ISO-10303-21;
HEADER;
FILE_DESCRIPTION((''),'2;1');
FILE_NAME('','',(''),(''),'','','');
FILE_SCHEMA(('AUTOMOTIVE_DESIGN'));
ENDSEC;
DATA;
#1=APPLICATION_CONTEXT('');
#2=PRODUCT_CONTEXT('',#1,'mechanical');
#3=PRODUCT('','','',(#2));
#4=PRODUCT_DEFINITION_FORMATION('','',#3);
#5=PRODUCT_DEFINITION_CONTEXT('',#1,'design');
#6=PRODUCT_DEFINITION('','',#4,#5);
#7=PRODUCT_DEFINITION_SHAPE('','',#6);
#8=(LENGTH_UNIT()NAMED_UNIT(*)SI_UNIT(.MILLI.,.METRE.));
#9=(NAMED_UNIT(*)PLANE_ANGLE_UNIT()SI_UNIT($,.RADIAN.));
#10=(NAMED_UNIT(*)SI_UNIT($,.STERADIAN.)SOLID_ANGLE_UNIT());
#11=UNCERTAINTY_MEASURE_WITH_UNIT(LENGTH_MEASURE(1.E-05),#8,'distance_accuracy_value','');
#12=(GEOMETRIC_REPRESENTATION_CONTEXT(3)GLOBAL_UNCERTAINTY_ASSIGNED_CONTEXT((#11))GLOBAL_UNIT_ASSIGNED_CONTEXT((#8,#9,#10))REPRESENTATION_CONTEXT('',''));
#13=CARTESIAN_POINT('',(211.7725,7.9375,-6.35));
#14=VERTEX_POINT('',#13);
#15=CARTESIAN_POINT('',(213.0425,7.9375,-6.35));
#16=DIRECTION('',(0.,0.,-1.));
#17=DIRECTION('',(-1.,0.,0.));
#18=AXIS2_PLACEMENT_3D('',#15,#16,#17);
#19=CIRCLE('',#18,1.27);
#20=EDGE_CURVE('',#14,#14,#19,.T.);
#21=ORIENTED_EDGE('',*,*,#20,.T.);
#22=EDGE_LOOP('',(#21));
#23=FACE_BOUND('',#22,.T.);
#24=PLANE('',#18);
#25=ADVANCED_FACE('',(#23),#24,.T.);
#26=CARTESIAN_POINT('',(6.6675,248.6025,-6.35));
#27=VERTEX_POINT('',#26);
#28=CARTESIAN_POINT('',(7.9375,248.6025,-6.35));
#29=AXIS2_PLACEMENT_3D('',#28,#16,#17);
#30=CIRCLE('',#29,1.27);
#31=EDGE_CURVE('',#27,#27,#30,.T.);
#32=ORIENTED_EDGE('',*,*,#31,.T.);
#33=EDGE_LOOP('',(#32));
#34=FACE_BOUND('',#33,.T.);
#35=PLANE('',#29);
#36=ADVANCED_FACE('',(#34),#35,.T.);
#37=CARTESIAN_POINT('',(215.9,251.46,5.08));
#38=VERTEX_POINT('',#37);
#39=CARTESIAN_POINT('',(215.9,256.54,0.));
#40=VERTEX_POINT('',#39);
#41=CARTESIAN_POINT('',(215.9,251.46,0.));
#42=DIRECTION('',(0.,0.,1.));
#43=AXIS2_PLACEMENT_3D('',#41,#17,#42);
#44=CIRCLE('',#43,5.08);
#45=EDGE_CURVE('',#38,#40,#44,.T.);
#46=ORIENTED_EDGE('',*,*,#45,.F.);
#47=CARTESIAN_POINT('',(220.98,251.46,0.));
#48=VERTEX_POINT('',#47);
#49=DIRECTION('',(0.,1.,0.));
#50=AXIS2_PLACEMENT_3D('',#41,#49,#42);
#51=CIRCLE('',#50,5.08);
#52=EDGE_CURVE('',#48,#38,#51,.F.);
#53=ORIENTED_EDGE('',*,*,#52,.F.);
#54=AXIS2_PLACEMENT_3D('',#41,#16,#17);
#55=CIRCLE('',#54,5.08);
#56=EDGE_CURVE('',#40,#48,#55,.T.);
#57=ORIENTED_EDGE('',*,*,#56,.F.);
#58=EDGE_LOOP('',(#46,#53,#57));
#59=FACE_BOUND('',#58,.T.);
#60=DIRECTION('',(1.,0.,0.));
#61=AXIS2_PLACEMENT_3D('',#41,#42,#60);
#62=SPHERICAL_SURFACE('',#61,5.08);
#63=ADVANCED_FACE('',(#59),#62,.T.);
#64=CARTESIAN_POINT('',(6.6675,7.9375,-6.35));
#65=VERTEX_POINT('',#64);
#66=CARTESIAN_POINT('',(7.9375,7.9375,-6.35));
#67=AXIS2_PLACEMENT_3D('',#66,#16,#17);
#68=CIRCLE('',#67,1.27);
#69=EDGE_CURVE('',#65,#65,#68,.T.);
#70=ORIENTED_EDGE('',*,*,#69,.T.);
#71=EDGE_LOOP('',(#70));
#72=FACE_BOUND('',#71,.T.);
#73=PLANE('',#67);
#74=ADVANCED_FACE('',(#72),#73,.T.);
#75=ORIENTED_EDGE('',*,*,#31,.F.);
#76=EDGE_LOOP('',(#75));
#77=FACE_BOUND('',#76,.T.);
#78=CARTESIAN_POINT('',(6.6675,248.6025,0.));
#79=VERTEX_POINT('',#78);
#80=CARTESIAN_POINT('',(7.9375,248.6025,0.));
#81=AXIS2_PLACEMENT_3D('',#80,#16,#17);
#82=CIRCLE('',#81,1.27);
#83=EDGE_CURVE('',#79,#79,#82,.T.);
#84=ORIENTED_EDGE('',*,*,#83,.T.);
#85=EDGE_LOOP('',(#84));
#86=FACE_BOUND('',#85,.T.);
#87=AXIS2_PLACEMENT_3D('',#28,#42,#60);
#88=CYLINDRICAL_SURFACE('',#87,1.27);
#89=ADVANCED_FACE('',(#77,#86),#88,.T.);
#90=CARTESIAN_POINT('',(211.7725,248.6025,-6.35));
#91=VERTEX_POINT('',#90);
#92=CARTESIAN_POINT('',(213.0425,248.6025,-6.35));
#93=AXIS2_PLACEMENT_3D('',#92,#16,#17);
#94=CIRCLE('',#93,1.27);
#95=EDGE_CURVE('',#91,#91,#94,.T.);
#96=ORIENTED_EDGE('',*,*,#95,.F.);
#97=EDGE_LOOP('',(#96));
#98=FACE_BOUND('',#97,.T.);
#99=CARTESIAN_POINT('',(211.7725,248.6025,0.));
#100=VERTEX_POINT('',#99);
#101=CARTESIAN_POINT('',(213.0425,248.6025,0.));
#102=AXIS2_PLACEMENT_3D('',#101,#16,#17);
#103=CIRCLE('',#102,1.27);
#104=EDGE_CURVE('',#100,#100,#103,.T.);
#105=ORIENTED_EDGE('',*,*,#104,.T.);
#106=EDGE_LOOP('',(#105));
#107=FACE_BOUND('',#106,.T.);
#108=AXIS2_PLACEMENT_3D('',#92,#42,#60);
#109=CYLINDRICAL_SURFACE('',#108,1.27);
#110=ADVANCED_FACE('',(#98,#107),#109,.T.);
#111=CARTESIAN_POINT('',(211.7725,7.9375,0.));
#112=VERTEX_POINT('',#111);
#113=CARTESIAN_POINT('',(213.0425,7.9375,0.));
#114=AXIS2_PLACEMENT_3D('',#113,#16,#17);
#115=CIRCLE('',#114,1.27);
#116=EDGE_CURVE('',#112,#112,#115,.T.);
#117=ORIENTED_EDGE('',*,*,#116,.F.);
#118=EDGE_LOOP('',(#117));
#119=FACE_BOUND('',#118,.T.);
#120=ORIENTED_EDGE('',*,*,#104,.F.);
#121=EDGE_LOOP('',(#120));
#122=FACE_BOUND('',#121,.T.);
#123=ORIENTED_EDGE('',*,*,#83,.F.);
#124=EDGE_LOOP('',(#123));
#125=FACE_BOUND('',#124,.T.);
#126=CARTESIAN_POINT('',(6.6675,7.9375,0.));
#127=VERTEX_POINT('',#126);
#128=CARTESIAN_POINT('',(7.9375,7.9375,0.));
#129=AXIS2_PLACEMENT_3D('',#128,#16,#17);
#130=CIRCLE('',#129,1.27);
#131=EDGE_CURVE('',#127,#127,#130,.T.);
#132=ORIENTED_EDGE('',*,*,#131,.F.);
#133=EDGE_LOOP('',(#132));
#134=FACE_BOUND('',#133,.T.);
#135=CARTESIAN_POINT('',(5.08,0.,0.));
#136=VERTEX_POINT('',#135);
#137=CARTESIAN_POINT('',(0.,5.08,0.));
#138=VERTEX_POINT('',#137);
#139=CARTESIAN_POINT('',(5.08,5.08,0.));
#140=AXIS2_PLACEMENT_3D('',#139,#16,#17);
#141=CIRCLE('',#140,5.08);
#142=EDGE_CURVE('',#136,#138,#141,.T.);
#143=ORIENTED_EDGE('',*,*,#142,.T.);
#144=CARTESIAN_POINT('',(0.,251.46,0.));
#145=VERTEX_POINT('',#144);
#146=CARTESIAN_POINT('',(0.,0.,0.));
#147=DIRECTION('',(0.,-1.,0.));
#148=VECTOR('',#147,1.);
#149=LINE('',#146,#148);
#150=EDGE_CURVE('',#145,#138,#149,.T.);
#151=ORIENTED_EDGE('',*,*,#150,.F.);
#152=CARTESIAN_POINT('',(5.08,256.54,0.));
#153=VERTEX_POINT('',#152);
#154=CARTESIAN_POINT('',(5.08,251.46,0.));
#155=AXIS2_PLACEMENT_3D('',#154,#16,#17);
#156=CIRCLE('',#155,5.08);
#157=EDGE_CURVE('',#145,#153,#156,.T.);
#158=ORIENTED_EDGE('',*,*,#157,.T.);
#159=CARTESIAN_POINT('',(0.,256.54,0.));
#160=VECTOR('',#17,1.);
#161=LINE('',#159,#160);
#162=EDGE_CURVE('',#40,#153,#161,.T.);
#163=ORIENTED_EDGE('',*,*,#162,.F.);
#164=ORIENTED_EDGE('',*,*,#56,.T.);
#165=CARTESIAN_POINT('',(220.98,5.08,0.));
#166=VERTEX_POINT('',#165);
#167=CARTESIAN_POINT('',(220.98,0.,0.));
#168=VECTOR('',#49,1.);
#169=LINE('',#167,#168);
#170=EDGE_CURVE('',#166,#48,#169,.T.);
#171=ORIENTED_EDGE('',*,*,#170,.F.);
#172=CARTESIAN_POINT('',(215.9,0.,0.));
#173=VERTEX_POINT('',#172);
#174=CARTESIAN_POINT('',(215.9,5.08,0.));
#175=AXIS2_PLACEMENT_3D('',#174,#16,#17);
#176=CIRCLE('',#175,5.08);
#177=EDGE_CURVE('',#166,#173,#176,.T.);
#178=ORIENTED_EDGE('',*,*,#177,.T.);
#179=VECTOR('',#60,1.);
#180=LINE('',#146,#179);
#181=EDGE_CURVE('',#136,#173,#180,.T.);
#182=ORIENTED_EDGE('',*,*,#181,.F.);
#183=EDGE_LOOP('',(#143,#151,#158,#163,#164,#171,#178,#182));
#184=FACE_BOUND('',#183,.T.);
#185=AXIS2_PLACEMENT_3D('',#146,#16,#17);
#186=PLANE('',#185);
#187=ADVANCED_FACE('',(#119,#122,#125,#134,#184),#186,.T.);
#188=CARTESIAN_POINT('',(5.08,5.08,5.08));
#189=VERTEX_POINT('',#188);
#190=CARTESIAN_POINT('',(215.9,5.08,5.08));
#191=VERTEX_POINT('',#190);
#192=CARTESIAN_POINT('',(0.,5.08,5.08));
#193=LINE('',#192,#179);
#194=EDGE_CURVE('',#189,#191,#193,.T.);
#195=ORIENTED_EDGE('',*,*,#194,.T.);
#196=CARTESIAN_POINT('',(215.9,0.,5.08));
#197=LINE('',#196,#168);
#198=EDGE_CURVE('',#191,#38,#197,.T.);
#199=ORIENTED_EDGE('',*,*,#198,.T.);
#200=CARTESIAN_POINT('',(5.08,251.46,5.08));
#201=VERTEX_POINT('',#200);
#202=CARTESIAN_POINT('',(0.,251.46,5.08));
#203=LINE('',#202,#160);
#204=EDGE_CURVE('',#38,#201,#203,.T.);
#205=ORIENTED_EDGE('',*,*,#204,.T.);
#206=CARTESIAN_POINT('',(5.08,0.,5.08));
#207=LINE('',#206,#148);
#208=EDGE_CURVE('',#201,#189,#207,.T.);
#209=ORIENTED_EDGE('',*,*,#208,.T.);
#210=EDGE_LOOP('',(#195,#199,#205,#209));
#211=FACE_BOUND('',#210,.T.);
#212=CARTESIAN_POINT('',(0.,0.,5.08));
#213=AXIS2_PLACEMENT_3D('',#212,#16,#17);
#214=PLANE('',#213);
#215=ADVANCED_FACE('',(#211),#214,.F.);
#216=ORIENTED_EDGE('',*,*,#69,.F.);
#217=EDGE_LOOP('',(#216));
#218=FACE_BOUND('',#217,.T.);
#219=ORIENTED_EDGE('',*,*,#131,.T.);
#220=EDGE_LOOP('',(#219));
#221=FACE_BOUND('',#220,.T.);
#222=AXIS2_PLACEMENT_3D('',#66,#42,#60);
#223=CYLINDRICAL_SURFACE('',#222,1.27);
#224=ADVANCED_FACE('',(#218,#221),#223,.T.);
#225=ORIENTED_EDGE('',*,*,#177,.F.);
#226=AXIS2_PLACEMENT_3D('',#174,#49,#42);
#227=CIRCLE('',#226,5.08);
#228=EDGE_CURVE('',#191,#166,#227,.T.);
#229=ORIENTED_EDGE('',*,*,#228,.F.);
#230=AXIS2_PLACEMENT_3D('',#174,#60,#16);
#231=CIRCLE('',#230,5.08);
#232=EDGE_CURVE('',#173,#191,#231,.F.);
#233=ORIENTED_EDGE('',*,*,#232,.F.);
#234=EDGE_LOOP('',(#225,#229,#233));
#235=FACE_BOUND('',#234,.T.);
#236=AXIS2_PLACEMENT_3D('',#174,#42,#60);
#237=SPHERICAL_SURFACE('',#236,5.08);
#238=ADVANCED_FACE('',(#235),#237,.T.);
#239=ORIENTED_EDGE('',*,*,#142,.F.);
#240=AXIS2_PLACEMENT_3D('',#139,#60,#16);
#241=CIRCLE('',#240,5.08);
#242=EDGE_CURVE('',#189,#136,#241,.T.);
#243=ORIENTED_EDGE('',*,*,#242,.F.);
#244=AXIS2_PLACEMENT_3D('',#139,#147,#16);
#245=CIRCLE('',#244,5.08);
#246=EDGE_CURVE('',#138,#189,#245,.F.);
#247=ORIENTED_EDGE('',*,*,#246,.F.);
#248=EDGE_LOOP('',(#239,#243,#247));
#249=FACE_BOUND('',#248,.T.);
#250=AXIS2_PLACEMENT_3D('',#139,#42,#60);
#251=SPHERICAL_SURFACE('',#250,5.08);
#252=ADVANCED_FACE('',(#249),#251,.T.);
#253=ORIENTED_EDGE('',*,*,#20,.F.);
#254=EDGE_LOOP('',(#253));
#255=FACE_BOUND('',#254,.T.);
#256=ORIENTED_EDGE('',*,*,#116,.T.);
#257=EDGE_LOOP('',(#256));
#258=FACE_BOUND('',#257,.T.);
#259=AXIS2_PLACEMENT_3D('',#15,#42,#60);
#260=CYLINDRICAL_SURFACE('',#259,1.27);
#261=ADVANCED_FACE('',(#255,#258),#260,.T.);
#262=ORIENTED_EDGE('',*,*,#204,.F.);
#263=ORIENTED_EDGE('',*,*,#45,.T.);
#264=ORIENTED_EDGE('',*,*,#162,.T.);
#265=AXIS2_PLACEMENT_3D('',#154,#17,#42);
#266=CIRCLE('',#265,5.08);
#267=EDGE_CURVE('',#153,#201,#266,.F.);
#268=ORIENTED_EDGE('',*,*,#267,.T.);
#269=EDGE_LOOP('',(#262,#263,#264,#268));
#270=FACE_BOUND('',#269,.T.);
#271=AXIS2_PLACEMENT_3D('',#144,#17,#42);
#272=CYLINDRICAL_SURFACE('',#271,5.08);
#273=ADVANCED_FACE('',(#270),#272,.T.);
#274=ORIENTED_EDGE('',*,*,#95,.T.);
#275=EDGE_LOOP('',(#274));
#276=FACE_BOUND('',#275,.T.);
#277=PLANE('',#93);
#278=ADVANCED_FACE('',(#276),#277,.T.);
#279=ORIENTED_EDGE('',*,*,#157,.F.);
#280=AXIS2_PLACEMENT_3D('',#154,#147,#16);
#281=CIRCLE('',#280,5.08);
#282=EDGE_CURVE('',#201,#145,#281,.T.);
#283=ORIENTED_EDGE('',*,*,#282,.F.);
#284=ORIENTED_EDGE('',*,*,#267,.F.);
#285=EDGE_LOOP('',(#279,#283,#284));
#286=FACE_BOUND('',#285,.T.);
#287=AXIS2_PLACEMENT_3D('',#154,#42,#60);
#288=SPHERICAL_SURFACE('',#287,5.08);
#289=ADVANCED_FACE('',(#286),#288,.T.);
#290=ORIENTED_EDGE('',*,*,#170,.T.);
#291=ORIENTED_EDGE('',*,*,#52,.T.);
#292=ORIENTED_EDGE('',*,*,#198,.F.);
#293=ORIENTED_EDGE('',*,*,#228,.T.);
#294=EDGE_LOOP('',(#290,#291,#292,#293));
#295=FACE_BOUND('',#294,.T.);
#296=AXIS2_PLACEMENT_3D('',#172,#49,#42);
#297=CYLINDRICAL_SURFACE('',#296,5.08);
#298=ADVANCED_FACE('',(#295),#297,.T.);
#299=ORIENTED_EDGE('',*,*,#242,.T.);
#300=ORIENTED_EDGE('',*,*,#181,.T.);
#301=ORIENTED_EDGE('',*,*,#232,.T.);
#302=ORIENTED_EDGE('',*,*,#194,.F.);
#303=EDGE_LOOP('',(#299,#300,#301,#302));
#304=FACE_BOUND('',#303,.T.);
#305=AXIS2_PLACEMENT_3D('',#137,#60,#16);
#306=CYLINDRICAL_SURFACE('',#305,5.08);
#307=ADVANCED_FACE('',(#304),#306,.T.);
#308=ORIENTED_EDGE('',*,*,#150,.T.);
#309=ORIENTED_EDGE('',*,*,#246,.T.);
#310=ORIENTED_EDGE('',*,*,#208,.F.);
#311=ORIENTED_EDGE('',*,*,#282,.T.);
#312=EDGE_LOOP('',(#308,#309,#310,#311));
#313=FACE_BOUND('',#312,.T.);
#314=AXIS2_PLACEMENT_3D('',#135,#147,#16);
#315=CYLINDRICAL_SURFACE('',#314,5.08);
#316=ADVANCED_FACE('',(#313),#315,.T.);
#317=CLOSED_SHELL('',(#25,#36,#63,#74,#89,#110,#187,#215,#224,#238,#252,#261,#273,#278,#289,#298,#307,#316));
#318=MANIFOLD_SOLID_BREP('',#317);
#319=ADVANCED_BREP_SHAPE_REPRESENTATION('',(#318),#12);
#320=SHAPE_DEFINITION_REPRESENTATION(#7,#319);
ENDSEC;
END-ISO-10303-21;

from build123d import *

# Parameters (mm, degrees)
SKETCH1_W           = 220.98
SKETCH1_H           = 256.54
BOSS_EXTRUDE1_DEPTH = 5.08
FILLET1_R           = 5.08
FILLET2_R           = 5.08
SKETCH2_R           = 1.27
BOSS_EXTRUDE2_DEPTH = 6.35


# Some blends are built 0.0001 mm under size
with BuildPart() as part:
    # Sketch1 → Boss-Extrude1 (new body)
    with BuildSketch(Plane.XY):
        with Locations((110.49, 128.27)):
            Rectangle(SKETCH1_W, SKETCH1_H)
    extrude(amount=BOSS_EXTRUDE1_DEPTH)

    # Fillet1
    fillet1_edges = [part.edges().sort_by_distance(p)[0] for p in [
        (110.49, 0, 5.08),
        (220.98, 128.27, 5.08),
        (0, 128.27, 5.08),
        (110.49, 256.54, 5.08),
    ]]
    fillet(fillet1_edges, radius=FILLET1_R - 0.0001)  # a hair under: the kernel refuses the full size

    # Fillet2
    # the kernel refuses this fillet: 5.08 mm, written as the material it takes off along each edge
    with BuildSketch(Plane(origin=(5.08, 251.46, 5.08), x_dir=(0, 1, 0), z_dir=(1, 0, 0))) as fillet2_piece_1:
        with BuildLine():
            CenterArc((0.0001, -5.0799), 5.0799, 0, 90)
            Line((5.08, -5.0799), (5.08, 0))
            Line((5.08, 0), (0.0001, 0))
        make_face()
    revolve(axis=Axis((5.08, 251.46, 5.08), (0, 0, 1)), revolution_arc=90, mode=Mode.SUBTRACT)
    with BuildSketch(Plane(origin=(215.9, 251.46, 5.08), x_dir=(1, 0, 0), z_dir=(0, -1, 0))) as fillet2_piece_2:
        with BuildLine():
            CenterArc((0.0001, -5.0799), 5.0799, 0, 90)
            Line((5.08, -5.0799), (5.08, 0))
            Line((5.08, 0), (0.0001, 0))
        make_face()
    revolve(axis=Axis((215.9, 251.46, 5.08), (0, 0, 1)), revolution_arc=90, mode=Mode.SUBTRACT)
    with BuildSketch(Plane(origin=(5.08, 5.08, 5.08), x_dir=(-1, 0, 0), z_dir=(0, 1, 0))) as fillet2_piece_3:
        with BuildLine():
            CenterArc((0.0001, -5.0799), 5.0799, 0, 90)
            Line((5.08, -5.0799), (5.08, 0))
            Line((5.08, 0), (0.0001, 0))
        make_face()
    revolve(axis=Axis((5.08, 5.08, 5.08), (0, 0, 1)), revolution_arc=90, mode=Mode.SUBTRACT)
    with BuildSketch(Plane(origin=(215.9, 5.08, 5.08), x_dir=(0, -1, 0), z_dir=(-1, 0, 0))) as fillet2_piece_4:
        with BuildLine():
            CenterArc((0.0001, -5.0799), 5.0799, 0, 90)
            Line((5.08, -5.0799), (5.08, 0))
            Line((5.08, 0), (0.0001, 0))
        make_face()
    revolve(axis=Axis((215.9, 5.08, 5.08), (0, 0, 1)), revolution_arc=90, mode=Mode.SUBTRACT)
    with BuildSketch(Plane(origin=(220.98, 0, -12.7), x_dir=(-1, 0, 0), z_dir=(0, 0, 1)), Plane(origin=(220.98, 256.54, -12.7), x_dir=(0, -1, 0), z_dir=(0, 0, 1))) as fillet2_piece_5:
        with BuildLine():
            CenterArc((FILLET2_R, -FILLET2_R), FILLET2_R, 90, 90)
            Line((0, -FILLET2_R), (0, 0))
            Line((0, 0), (FILLET2_R, 0))
        make_face()
    extrude(amount=17.78, mode=Mode.SUBTRACT)
    with BuildSketch(Plane(origin=(0, 0, -12.7), x_dir=(1, 0, 0), z_dir=(0, 0, 1)), Plane(origin=(0, 256.54, -12.7), x_dir=(0, -1, 0), z_dir=(0, 0, 1))) as fillet2_piece_6:
        with BuildLine():
            CenterArc((FILLET2_R, FILLET2_R), FILLET2_R, 180, 90)
            Line((0, FILLET2_R), (0, 0))
            Line((0, 0), (FILLET2_R, 0))
        make_face()
    extrude(amount=17.78, mode=Mode.SUBTRACT)

    # Sketch2 → Boss-Extrude2 (add)
    with BuildSketch(Plane(origin=(0, 0, 0), x_dir=(-1, 0, 0), z_dir=(0, 0, -1))):
        with Locations((-213.0425, 248.6025)):
            Circle(SKETCH2_R)
        with Locations((-7.9375, 248.6025)):
            Circle(SKETCH2_R)
        with Locations((-213.0425, 7.9375)):
            Circle(SKETCH2_R)
        with Locations((-7.9375, 7.9375)):
            Circle(SKETCH2_R)
    extrude(amount=BOSS_EXTRUDE2_DEPTH)


solid = part.part
